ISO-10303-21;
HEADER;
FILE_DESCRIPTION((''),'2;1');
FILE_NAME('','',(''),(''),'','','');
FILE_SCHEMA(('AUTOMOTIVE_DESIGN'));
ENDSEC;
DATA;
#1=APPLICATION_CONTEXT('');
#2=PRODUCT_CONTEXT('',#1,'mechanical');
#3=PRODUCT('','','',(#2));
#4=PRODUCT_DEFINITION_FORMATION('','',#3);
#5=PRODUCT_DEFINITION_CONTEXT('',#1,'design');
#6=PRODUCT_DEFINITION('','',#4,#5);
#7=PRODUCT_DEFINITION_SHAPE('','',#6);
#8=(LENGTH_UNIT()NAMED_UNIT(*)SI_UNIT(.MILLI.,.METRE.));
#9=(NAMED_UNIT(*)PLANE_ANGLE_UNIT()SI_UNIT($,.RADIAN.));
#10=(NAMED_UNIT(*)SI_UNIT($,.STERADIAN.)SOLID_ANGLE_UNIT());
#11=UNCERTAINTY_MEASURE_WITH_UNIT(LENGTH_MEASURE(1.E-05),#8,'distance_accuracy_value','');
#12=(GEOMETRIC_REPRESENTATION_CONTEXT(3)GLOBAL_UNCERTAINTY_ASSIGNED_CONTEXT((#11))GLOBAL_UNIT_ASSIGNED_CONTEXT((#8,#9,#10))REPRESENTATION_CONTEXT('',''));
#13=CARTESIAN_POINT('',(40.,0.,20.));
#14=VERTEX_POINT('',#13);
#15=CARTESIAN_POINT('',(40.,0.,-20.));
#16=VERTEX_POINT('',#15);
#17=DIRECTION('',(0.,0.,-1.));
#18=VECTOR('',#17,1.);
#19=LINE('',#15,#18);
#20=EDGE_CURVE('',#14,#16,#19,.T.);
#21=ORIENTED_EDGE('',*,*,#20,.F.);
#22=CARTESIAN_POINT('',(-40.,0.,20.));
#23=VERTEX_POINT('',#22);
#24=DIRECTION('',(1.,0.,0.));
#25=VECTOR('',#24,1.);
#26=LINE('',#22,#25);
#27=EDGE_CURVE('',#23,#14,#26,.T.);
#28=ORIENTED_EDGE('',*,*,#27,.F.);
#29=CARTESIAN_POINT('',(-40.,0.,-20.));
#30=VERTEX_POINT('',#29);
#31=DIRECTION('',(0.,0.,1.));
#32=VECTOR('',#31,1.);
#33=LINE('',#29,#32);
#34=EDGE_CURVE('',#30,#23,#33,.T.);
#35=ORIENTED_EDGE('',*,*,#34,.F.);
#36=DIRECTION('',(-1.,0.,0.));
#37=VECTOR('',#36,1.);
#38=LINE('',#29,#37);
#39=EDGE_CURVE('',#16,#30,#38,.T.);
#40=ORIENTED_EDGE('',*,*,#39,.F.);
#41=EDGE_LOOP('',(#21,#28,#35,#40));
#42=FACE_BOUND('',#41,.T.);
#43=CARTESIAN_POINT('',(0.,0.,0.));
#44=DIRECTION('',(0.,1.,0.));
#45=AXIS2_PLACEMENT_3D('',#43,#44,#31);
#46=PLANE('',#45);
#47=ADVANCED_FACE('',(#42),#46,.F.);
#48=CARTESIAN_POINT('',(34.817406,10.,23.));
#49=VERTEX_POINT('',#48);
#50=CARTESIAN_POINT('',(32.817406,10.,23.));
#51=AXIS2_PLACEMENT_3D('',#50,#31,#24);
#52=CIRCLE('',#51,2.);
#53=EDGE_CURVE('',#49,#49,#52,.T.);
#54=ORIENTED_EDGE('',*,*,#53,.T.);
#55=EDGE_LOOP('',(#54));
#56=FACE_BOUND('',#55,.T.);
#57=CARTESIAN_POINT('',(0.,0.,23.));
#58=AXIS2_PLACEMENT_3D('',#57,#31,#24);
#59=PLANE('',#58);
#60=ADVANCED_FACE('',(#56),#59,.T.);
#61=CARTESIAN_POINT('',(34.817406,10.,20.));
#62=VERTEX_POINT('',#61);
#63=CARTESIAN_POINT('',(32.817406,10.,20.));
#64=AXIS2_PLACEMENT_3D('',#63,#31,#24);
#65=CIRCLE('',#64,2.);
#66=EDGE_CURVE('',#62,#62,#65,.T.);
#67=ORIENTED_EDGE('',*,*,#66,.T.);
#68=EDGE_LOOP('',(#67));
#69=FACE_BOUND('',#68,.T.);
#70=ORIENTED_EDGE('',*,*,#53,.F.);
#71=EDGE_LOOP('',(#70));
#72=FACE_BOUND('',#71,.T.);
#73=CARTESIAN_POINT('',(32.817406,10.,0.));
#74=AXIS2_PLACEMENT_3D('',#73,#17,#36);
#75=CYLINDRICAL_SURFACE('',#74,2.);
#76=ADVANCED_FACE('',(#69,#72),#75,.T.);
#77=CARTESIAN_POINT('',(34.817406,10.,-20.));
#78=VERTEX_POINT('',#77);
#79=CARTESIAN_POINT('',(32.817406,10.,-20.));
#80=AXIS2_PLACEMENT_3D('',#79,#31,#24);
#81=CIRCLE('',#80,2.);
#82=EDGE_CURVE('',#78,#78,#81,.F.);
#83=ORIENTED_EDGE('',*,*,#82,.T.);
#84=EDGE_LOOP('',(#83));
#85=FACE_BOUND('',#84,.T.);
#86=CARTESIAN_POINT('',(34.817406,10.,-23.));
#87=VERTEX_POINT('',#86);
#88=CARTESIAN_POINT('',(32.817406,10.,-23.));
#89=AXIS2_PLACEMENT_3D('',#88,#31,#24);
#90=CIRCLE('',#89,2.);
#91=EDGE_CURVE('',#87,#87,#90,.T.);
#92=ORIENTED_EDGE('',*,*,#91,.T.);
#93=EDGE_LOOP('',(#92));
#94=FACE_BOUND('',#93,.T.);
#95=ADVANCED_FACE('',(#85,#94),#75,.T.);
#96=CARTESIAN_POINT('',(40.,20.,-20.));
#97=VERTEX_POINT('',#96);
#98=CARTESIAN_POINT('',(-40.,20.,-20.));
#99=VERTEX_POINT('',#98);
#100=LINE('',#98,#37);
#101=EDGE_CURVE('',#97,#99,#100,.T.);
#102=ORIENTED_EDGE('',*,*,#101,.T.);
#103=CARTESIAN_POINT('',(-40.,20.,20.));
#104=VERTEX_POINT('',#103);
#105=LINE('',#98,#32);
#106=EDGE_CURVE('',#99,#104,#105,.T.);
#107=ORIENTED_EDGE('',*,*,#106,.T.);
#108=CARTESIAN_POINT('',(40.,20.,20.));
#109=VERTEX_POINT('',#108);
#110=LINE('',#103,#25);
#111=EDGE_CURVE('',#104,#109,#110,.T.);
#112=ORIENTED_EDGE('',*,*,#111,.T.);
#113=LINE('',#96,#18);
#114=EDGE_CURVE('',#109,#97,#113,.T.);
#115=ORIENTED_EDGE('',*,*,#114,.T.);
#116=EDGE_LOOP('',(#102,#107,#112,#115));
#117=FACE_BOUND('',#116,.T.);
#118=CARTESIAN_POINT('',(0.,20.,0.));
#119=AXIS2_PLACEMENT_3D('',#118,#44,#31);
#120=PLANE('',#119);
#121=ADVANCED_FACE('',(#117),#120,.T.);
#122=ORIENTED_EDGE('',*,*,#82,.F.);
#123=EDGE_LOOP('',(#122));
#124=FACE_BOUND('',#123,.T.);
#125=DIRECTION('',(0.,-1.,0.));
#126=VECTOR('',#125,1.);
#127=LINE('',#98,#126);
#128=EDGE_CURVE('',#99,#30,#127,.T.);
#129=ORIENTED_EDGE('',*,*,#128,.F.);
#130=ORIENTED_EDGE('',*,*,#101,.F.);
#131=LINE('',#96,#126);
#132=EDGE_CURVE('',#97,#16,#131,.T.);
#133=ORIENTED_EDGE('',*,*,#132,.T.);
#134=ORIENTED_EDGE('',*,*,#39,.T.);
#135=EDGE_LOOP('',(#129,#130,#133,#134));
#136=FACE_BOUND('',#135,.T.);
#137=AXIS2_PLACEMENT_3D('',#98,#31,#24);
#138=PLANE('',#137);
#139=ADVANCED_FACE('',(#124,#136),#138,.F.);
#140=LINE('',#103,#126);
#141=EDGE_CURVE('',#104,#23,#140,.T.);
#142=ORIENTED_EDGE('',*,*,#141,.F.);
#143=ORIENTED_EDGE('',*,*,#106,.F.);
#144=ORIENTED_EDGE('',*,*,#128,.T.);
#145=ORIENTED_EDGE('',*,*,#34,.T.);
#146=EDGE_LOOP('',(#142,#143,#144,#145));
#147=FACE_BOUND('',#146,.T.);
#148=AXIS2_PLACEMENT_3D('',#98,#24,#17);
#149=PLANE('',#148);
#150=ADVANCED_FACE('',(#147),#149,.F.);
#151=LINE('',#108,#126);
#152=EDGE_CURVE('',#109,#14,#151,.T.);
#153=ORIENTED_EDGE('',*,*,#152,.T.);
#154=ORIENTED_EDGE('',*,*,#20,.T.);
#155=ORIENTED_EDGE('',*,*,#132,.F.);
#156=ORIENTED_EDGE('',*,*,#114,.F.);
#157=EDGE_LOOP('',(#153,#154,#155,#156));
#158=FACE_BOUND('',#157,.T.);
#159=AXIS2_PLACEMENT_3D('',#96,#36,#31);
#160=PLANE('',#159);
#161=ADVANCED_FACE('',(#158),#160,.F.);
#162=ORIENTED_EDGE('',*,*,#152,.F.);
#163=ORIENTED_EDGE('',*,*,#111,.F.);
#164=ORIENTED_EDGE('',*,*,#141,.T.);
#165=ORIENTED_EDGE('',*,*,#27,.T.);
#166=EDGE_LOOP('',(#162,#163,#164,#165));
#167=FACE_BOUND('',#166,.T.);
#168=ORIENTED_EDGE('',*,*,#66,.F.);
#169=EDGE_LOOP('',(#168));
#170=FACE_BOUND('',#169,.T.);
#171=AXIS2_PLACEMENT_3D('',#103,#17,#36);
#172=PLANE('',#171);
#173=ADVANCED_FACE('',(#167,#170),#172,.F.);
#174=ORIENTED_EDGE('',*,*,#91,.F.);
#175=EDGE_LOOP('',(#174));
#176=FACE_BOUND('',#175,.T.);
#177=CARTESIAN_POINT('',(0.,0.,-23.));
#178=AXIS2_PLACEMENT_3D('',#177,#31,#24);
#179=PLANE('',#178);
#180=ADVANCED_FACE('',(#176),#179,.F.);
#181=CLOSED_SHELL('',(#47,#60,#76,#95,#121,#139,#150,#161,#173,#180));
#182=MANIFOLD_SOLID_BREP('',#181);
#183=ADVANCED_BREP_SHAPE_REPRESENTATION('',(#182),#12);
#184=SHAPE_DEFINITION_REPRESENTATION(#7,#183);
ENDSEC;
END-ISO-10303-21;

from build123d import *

# Parameters (mm, degrees)
SKETCH3_W               = 80
SKETCH3_H               = 40
BOSS_EXTRUDE1_DEPTH     = 20
SKETCH5_R               = 2
CUT_EXTRUDE2_DEPTH      = 40
BOSS_EXTRUDE2_START     = -23
BOSS_EXTRUDE2_OUTLINE_R = 2
BOSS_EXTRUDE2_DEPTH     = 46


# Read off the part's stored shape, not the designer's step: Boss-Extrude2
with BuildPart() as part:
    # Sketch3 → Boss-Extrude1 (new body)
    with BuildSketch(Plane(origin=(0, 0, 0), x_dir=(1, 0, 0), z_dir=(0, 1, 0))):
        Rectangle(SKETCH3_W, SKETCH3_H)
    extrude(amount=BOSS_EXTRUDE1_DEPTH)

    # Sketch5 → Cut-Extrude2 (cut)
    with BuildSketch(Plane.XY.offset(20)):
        with Locations((32.81740635, 10)):
            Circle(SKETCH5_R)
    extrude(amount=-CUT_EXTRUDE2_DEPTH, mode=Mode.SUBTRACT)

    # Boss-Extrude2 outline → Boss-Extrude2 (add)
    with BuildSketch(Plane.XY.offset(BOSS_EXTRUDE2_START)):
        with Locations((32.81740635, 10)):
            Circle(BOSS_EXTRUDE2_OUTLINE_R)
    extrude(amount=BOSS_EXTRUDE2_DEPTH)


solid = part.part
